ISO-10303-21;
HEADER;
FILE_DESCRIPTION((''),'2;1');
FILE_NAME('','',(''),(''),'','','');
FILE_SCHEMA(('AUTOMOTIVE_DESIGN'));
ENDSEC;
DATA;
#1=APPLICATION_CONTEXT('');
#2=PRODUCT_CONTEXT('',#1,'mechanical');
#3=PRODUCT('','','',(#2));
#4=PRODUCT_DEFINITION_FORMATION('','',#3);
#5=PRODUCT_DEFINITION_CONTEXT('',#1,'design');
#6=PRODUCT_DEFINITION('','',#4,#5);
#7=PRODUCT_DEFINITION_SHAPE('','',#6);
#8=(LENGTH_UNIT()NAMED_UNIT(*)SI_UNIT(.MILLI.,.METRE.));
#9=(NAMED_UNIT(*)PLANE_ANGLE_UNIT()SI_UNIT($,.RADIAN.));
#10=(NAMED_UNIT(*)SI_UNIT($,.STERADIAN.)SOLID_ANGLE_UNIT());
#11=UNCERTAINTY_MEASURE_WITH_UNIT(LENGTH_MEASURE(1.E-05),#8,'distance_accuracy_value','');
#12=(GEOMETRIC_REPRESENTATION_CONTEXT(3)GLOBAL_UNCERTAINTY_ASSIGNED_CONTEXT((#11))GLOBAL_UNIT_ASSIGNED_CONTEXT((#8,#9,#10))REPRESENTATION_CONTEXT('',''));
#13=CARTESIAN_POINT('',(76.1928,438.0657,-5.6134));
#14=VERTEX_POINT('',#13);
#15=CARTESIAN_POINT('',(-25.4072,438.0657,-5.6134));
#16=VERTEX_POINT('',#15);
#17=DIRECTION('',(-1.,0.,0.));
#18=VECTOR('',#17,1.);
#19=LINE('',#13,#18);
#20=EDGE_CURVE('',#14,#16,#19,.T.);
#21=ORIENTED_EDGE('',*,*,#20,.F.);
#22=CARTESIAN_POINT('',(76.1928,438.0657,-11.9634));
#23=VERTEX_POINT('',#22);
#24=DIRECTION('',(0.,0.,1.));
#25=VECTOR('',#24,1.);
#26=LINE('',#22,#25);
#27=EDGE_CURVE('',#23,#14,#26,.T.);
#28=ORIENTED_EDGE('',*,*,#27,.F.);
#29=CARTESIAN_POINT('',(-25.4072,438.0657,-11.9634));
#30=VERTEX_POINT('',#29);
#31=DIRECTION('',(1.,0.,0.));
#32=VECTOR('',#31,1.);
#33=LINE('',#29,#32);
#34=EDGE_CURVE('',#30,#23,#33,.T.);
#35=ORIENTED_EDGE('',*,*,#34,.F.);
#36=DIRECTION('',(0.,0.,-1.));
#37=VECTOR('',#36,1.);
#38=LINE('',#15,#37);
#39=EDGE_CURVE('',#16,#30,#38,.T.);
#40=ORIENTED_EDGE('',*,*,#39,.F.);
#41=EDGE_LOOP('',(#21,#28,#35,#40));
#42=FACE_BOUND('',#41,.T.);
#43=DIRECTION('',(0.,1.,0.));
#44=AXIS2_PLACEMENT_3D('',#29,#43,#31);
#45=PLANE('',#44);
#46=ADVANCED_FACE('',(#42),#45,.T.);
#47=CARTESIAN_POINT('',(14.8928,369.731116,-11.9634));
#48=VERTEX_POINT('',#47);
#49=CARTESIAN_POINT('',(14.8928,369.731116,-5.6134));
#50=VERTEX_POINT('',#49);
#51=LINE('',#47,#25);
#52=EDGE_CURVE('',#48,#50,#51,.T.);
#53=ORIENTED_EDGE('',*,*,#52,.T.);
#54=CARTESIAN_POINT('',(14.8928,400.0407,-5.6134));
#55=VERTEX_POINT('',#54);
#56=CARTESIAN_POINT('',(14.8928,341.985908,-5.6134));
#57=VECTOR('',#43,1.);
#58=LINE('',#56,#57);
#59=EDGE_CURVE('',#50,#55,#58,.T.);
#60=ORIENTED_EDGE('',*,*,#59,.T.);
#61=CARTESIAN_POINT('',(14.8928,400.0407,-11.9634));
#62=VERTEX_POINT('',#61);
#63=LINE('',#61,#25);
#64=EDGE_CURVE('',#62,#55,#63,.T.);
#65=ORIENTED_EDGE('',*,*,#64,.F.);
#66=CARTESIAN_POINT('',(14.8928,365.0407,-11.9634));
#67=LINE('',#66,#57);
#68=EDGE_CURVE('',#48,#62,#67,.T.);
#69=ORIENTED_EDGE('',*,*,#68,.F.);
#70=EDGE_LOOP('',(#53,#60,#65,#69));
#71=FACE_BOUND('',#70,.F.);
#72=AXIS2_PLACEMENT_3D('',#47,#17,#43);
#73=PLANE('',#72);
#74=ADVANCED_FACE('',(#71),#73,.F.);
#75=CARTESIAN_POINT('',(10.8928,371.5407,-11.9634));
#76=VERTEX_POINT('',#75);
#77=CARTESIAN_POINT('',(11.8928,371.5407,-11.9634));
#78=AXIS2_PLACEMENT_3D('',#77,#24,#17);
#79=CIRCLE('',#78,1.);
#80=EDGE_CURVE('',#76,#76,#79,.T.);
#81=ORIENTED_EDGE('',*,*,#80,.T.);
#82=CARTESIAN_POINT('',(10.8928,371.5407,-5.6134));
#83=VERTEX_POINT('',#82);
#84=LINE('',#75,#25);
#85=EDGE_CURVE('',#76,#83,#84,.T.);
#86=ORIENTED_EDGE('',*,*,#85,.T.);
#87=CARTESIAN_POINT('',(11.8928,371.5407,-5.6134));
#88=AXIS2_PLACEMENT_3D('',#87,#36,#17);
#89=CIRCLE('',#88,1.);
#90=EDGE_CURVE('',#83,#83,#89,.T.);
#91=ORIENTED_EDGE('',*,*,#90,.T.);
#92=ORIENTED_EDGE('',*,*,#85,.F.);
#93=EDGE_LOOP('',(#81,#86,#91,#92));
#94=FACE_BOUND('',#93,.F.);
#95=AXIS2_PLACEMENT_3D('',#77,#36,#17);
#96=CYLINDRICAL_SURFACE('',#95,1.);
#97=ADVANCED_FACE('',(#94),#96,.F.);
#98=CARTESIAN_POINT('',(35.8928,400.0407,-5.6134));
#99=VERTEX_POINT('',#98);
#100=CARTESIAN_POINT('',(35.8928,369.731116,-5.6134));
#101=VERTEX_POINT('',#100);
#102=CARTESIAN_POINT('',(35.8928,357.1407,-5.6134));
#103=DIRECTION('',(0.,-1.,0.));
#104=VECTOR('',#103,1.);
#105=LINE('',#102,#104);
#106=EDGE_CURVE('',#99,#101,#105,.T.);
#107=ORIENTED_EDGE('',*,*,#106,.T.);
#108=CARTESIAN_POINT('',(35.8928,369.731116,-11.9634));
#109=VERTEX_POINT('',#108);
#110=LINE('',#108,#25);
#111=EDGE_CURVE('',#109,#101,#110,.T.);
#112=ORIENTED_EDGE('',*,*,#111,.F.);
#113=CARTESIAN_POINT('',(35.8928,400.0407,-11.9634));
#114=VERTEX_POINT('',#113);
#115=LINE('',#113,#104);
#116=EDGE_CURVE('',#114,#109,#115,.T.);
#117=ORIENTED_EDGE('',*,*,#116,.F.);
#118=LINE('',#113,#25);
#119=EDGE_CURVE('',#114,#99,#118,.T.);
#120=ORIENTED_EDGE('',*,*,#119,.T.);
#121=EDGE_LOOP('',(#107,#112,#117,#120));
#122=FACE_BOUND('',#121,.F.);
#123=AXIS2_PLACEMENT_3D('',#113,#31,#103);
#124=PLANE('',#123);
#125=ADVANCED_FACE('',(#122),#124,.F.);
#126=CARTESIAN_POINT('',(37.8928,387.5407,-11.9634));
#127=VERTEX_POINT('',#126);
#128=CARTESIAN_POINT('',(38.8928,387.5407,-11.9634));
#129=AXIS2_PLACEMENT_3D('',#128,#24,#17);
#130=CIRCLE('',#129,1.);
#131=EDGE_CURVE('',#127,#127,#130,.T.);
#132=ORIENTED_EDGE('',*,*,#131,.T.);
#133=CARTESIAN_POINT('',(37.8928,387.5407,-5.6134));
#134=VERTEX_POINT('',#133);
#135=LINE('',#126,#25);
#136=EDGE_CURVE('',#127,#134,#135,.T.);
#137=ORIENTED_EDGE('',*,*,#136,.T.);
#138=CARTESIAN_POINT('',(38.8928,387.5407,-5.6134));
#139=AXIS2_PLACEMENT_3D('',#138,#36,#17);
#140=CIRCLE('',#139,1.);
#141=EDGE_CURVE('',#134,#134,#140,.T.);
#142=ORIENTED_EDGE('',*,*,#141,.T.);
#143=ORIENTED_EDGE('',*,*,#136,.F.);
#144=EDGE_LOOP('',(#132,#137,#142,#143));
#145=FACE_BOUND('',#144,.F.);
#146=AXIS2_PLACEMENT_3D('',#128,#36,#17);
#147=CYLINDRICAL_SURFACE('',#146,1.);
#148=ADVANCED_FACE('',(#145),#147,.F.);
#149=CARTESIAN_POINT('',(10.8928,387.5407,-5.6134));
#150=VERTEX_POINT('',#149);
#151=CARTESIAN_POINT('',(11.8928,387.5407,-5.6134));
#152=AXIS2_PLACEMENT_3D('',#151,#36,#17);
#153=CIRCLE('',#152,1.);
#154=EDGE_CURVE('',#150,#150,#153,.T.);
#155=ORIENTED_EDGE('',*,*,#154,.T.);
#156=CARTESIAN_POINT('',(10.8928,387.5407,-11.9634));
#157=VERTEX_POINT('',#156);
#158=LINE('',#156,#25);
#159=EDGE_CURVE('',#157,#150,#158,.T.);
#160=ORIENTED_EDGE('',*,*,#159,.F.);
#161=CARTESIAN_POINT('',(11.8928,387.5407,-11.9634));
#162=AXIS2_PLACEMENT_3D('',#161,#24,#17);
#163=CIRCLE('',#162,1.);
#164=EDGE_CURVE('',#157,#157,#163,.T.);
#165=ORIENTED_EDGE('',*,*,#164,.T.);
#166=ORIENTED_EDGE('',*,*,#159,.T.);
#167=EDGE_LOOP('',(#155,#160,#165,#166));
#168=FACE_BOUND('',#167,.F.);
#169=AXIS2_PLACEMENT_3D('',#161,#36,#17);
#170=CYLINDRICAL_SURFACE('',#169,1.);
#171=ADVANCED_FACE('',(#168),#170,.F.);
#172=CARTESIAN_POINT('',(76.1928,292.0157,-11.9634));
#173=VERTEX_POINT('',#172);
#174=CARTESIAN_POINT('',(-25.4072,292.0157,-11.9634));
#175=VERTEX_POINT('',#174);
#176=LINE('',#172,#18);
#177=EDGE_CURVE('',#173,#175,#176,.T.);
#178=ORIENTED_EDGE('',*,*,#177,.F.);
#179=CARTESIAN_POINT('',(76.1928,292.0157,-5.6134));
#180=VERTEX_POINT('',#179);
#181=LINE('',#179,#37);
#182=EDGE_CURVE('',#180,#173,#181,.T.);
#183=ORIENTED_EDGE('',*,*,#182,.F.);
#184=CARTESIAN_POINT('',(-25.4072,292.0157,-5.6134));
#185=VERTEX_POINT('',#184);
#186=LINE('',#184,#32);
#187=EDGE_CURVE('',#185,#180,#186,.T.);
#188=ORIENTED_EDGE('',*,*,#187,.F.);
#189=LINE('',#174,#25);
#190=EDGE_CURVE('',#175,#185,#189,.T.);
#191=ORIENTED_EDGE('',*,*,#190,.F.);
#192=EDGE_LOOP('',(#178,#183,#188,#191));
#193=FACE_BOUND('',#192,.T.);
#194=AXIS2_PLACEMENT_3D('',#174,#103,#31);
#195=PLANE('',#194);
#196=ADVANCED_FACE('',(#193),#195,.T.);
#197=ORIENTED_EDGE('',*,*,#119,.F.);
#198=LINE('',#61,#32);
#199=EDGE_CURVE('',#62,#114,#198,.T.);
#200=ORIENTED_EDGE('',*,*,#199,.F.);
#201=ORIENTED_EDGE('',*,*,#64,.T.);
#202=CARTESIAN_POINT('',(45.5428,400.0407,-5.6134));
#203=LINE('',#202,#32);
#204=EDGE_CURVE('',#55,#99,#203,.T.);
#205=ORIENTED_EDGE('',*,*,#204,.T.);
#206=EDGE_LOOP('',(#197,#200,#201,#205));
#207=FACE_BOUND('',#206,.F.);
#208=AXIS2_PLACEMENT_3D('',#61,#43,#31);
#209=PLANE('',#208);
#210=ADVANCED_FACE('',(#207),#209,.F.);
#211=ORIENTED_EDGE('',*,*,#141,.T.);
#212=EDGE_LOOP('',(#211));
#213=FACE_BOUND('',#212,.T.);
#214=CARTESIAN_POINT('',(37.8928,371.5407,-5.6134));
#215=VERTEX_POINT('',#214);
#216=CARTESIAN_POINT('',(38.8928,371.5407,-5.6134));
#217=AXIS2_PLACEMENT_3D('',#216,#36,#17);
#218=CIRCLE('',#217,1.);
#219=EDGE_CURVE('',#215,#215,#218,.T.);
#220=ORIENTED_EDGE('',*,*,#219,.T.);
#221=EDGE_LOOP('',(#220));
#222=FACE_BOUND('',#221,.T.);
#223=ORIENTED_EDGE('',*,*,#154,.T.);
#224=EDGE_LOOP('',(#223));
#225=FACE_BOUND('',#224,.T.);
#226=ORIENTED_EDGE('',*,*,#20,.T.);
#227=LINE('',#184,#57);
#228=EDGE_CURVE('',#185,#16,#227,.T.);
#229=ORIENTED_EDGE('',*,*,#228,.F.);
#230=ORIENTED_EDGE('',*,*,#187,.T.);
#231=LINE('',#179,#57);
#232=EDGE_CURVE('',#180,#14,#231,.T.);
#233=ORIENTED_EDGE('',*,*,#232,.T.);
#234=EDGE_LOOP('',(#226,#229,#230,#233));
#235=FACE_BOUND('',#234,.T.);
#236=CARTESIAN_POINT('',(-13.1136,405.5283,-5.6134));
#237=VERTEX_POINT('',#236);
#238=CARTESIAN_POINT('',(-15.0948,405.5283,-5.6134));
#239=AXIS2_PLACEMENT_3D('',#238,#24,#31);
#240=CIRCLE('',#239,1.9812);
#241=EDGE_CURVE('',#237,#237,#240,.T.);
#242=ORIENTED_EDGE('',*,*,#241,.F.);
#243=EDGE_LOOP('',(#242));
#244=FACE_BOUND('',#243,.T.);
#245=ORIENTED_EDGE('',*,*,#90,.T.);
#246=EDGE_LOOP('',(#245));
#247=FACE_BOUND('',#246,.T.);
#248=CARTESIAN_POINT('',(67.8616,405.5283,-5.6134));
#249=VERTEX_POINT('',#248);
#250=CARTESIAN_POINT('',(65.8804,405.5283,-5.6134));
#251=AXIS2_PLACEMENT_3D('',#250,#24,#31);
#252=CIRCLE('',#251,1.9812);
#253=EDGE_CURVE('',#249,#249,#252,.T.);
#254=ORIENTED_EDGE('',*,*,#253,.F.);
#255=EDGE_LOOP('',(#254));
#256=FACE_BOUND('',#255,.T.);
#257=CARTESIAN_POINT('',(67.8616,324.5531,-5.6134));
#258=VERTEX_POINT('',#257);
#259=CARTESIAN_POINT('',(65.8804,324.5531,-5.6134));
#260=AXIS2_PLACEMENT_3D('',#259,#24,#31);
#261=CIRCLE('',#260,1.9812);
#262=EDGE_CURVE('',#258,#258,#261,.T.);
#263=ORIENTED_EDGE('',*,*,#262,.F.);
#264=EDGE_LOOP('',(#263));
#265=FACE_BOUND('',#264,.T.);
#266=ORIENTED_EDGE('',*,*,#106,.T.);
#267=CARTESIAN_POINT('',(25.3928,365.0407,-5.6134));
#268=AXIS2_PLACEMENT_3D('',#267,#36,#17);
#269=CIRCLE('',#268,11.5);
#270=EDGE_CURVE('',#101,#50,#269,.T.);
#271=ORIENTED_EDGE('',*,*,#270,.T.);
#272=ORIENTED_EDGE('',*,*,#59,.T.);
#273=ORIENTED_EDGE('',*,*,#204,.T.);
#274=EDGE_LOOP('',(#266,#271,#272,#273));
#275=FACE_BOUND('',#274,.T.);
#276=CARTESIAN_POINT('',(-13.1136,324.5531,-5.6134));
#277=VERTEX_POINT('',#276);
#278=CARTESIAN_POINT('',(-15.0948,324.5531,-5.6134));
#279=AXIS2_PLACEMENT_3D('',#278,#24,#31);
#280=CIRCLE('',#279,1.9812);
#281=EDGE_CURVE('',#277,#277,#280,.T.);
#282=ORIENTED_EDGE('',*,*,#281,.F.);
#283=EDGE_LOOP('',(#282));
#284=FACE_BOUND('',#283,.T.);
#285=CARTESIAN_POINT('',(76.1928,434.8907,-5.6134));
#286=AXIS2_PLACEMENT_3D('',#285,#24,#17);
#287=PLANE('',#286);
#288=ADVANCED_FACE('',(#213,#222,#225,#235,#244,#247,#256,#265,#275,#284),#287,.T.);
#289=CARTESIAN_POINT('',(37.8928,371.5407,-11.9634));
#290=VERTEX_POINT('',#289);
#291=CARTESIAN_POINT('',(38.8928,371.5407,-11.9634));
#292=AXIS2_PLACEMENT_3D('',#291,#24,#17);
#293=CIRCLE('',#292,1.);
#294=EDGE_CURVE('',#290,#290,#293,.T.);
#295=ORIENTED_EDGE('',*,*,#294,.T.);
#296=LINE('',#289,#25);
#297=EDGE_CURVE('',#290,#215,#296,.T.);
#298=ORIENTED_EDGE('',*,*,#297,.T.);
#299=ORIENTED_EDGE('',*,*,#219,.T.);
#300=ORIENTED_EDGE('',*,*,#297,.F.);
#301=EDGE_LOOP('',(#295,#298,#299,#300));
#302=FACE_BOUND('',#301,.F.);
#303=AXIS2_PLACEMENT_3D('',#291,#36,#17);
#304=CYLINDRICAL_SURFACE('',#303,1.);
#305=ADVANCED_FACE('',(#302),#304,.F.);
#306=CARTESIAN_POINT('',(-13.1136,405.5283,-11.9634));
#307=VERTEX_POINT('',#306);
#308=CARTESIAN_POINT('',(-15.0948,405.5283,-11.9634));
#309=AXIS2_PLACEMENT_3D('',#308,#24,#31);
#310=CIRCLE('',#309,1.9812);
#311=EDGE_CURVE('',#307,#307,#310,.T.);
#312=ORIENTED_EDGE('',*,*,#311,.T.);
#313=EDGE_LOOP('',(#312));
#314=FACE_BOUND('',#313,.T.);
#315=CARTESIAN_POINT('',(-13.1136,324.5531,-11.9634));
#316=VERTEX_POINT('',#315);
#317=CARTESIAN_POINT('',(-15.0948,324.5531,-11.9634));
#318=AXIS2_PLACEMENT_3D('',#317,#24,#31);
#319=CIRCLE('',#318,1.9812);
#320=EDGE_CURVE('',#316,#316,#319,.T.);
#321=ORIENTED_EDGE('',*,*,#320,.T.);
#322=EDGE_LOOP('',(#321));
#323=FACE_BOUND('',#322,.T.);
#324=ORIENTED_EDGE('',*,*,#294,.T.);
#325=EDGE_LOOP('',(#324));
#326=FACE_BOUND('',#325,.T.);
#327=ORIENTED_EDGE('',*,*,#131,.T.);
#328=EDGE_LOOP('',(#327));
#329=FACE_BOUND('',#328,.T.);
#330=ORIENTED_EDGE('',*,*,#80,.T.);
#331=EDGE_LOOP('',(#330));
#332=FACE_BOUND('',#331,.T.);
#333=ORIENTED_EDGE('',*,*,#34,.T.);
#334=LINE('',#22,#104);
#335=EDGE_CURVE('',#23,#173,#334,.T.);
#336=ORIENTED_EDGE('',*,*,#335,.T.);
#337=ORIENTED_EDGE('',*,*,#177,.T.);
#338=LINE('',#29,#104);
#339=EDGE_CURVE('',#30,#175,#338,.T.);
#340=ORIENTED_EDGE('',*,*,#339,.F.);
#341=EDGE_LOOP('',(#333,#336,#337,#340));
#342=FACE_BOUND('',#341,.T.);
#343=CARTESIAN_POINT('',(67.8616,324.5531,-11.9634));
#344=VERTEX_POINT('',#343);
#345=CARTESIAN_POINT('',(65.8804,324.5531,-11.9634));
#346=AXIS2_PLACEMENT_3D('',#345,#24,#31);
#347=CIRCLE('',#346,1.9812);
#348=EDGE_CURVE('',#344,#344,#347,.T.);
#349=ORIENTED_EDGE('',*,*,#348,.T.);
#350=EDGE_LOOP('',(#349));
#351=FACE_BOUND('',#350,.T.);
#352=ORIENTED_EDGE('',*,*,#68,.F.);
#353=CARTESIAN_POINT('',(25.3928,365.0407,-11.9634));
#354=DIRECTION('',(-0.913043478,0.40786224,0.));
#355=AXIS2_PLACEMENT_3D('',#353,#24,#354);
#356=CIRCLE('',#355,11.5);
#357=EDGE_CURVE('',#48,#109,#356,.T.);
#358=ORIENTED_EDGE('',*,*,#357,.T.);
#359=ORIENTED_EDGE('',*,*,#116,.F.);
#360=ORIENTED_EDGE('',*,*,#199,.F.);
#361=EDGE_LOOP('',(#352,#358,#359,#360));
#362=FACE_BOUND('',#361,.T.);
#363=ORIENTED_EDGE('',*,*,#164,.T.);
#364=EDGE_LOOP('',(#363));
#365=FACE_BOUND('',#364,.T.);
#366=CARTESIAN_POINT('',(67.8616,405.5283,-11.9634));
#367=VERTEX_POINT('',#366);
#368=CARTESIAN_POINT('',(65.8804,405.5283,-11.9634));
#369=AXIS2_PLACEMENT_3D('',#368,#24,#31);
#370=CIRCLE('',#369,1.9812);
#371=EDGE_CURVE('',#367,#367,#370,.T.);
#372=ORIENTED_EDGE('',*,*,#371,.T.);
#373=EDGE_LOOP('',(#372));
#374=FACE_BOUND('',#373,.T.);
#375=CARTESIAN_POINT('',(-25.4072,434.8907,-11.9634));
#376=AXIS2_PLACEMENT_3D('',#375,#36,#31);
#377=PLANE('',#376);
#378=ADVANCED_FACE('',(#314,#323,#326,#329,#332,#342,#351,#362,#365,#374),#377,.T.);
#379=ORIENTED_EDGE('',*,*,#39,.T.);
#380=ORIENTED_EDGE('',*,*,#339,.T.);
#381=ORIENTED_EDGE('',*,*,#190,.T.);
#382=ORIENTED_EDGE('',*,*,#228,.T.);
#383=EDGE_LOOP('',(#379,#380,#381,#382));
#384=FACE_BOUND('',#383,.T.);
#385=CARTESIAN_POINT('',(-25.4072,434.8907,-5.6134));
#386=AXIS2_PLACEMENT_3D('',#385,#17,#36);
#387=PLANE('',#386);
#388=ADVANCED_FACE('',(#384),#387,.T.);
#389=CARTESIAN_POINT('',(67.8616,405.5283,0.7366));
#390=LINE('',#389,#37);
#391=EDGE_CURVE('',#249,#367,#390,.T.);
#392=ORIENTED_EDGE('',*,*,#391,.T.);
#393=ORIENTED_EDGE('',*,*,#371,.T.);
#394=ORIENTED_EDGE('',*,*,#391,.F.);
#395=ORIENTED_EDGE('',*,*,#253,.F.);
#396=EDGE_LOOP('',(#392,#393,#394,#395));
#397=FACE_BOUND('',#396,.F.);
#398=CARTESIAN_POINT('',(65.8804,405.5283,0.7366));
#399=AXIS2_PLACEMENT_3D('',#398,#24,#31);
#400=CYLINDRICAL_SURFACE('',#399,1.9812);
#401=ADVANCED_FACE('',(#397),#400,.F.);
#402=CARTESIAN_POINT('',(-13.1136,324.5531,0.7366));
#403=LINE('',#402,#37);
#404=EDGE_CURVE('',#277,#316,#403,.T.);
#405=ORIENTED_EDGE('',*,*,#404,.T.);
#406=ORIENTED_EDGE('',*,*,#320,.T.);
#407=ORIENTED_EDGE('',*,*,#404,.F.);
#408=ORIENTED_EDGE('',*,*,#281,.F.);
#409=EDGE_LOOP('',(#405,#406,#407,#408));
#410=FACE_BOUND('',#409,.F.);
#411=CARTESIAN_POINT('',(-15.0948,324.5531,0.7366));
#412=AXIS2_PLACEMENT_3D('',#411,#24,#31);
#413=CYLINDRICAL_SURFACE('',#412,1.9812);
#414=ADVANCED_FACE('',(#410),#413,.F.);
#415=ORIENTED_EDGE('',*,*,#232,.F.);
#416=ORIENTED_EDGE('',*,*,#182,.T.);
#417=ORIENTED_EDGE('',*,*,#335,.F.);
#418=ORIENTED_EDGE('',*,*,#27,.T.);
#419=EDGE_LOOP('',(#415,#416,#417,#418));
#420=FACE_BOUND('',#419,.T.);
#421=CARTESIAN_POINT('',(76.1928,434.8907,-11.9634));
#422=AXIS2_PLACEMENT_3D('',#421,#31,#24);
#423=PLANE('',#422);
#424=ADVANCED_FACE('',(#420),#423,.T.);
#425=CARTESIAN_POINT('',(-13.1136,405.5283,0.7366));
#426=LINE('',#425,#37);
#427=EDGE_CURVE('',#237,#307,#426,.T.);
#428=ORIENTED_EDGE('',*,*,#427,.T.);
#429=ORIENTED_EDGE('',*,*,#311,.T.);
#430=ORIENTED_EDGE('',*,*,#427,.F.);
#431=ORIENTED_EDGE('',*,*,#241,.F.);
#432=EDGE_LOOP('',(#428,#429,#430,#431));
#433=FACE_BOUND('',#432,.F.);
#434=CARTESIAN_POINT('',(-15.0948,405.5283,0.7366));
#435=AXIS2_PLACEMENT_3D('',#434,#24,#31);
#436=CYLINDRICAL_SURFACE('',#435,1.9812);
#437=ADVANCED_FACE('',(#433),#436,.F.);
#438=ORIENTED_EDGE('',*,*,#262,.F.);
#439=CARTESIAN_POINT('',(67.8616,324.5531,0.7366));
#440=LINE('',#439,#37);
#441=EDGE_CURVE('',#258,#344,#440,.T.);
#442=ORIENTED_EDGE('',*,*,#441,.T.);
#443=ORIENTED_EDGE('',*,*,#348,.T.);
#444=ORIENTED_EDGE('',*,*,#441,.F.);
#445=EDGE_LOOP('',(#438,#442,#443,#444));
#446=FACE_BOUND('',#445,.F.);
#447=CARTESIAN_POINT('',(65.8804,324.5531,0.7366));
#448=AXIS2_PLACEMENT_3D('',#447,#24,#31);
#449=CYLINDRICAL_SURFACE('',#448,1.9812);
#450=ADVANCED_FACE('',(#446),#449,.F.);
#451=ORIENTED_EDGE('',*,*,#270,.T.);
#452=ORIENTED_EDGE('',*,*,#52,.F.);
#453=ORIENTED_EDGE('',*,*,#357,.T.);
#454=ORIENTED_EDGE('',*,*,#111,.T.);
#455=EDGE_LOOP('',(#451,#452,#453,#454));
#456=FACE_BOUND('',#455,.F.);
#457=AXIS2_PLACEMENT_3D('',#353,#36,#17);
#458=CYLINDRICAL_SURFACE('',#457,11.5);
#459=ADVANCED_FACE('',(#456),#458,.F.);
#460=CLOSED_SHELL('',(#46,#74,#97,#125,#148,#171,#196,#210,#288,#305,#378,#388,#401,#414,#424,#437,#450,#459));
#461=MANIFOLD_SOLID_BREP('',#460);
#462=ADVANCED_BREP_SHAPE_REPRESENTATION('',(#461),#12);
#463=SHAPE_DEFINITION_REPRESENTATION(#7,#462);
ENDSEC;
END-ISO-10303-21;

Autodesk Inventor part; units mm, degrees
ref_plane "YZ Plane" through (0, 0, 0) normal (1, 0, 0) x (0, 1, 0)
ref_plane "XZ Plane" through (0, 0, 0) normal (0, 1, 0) x (-1, 0, 0)
ref_plane "XY Plane" through (0, 0, 0) normal (0, 0, 1) x (1, 0, 0)
sketch "Sketch1" plane through (0, 0, 0) normal (0, 0, 1) x (1, 0, 0)
  line L0 (-25.4072, 25.3665) -> (76.1928, 25.3665)
  line L1 (76.1928, 25.3665) -> (76.1928, -76.2335)
  line L2 (76.1928, -76.2335) -> (-25.4072, -76.2335)
  line L3 (-25.4072, -76.2335) -> (-25.4072, 25.3665)
  point P0 (0, 0)
  dimension "d0" = 101.6
  dimension "d1" = 101.6
extrude "Extrusion1" add sketch "Sketch1" along normal blind 0.7366
sketch "Sketch2" plane through (0, 0, 0.7366) normal (0, 0, 1) x (1, 0, 0)
  line L0 (-25.4072, 25.3665) -> (76.1928, -76.2335)
  line L1 (76.1928, 25.3665) -> (-25.4072, -76.2335)
  circle A0 centre (25.3928, -25.4335) radius 27.432
  point P0 (0, 0)
  dimension "d4" = 54.864
extrude "Extrusion2" cut sketch "Sketch2" against normal blind 0.7366
sketch "Sketch3" plane through (0, 0, 0.7366) normal (0, 0, 1) x (1, 0, 0)
  line L0 (-25.4072, -76.2335) -> (-25.4072, 25.3665) projected
  line L1 (-25.4072, 25.3665) -> (-25.4072, -25.4335)
  line L2 (-25.4072, -25.4335) -> (-25.4072, 19.4102)
  line L3 (-25.4072, 25.3665) -> (76.1928, -76.2335)
  line L4 (76.1928, 25.3665) -> (-25.4072, -76.2335)
  circle A0 centre (-19.4509, 19.4102) radius 1.9812
  point P0 (0, 0)
  dimension "d7" = 44.8437
  dimension "d8" = 3.9624
extrude "Extrusion3" cut sketch "Sketch3" against normal blind 0.7366 contours A0 L3 | L3 A0
sketch "Sketch4" plane through (0, 0, 0.7366) normal (0, 0, 1) x (1, 0, 0)
  line L0 (-25.4072, -76.2335) -> (76.1928, 25.3665)
  line L1 (-25.4072, 25.3665) -> (76.1928, -76.2335)
  circle A0 centre (70.2365, 19.4102) radius 1.9819
  circle A1 centre (70.2365, -70.2772) radius 1.983
  circle A2 centre (-19.4509, -70.2772) radius 1.9812
  point P0 (0, 0)
extrude "Extrusion4" cut sketch "Sketch4" against normal blind 0.7366
sketch "Sketch5" plane through (0, 0, 0.7366) normal (0, 0, 1) x (1, 0, 0)
  circle A0 centre (25.3928, -25.4335) radius 27.432 projected
  circle A1 centre (25.3928, -25.4335) radius 29.972
  circle A2 centre (25.3928, -25.4335) radius 32.512
  point P0 (0, 0)
  dimension "d13" = 59.944
  dimension "d14" = 65.024
extrude "Extrusion5" add sketch "Sketch5" along normal blind 6.6548 contours A2
fillet "Fillet1" radius 3.175 4 edges at (-25.4072, 25.3665, 0.3683) (76.1928, 25.3665, 0.3683) (76.1928, -76.2335, 0.3683) (-25.4072, -76.2335, 0.3683)
sketch "Sketch6" plane through (25.3928, -25.4335, 0.7366) normal (0, 0, 1) x (1, 0, 0)
  circle A0 centre (0, 0) radius 29.972 projected
  circle A1 centre (0, 0) radius 27.432 projected
  point P0 (-25.3928, 25.4335)
extrude "Extrusion6" add sketch "Sketch6" along normal blind 9.1948
sketch "Sketch7" plane through (25.3928, -25.4335, 7.3914) normal (0, 0, 1) x (1, 0, 0)
  circle A0 centre (0, 0) radius 29.972 projected
  circle A1 centre (0, 0) radius 32.512 projected
  point P0 (-25.3928, 25.4335)
extrude "Extrusion7" cut sketch "Sketch7" against normal blind 6.6548
sketch "Sketch8" plane through (25.3928, -25.4335, 9.9314) normal (0, 0, 1) x (1, 0, 0)
  circle A0 centre (0, 0) radius 27.432 projected
  circle A1 centre (0, 0) radius 29.972 projected
  point P0 (-25.3928, 25.4335)
extrude "Extrusion8" cut sketch "Sketch8" against normal blind 2.54
sketch "Sketch9" plane through (0, 0, 0.7366) normal (0, 0, 1) x (1, 0, 0)
  circle A0 centre (-19.4509, 19.4102) radius 1.9812 projected
  circle A1 centre (70.2365, -70.2772) radius 1.983 projected
  circle A2 centre (-19.4509, -70.2772) radius 1.9812 projected
  circle A3 centre (70.2365, 19.4102) radius 1.9819 projected
  point P0 (0, 0)
extrude "Extrusion9" add sketch "Sketch9" against normal blind 0.7366
sketch "Sketch10" plane through (0, 0, 0.7366) normal (0, 0, 1) x (1, 0, 0)
  line L0 (-25.4072, 25.3665) -> (76.1928, 25.3665)
  line L1 (76.1928, 25.3665) -> (76.1928, -76.2335)
  line L2 (76.1928, -76.2335) -> (-25.4072, -76.2335)
  line L3 (-25.4072, -76.2335) -> (-25.4072, 25.3665)
  line L4 (-25.4072, 25.3665) -> (76.1928, -76.2335)
  line L5 (-25.4072, -76.2335) -> (76.1928, 25.3665)
  line L6 (-25.4072, 25.3665) -> (-25.4072, -25.4335)
  line L7 (-25.4072, -25.4335) -> (-25.4072, 15.0541)
  circle A0 centre (-15.0948, 15.0541) radius 1.9812
  circle A1 centre (65.8804, 15.0541) radius 1.9818
  circle A2 centre (65.8804, -65.9211) radius 1.9832
  circle A3 centre (-15.0948, -65.9211) radius 1.9812
  point P0 (0, 0)
  dimension "d26" = 40.4876
  dimension "d27" = 3.9624
extrude "Extrusion10" cut sketch "Sketch10" against normal blind 0.7366 contours A0 L4 | L4 A0 | A1 L5 | L5 A1 | A2 L4 | L4 A2 | A3 L5 | L5 A3
sketch "Sketch11" plane through (0, 0, 0.7366) normal (0, 0, 1) x (1, 0, 0)
  circle A0 centre (-15.0948, 15.0541) radius 1.9812 projected
  circle A1 centre (-15.0948, -65.9211) radius 1.9812 projected
  circle A2 centre (65.8804, 15.0541) radius 1.9818 projected
  circle A3 centre (65.8804, -65.9211) radius 1.9832 projected
  line L0 (-25.4072, 25.3665) -> (76.1928, 25.3665)
  line L1 (76.1928, 25.3665) -> (76.1928, -76.2335)
  line L2 (76.1928, -76.2335) -> (-25.4072, -76.2335)
  line L3 (-25.4072, -76.2335) -> (-25.4072, 25.3665)
  point P0 (0, 0)
extrude "Extrusion11" add sketch "Sketch11" along normal blind 12.7
sketch "Sketch12" plane through (0, 0, 13.4366) normal (0, 0, 1) x (1, 0, 0)
  circle A0 centre (65.8804, -65.9211) radius 1.9832 projected
  circle A1 centre (65.8804, 15.0541) radius 1.9818 projected
  circle A2 centre (-15.0948, 15.0541) radius 1.9812 projected
  circle A3 centre (-15.0948, -65.9211) radius 1.9812 projected
  line L0 (76.1928, 25.3665) -> (76.1928, -76.2335) projected
  line L1 (-25.4072, 25.3665) -> (76.1928, 25.3665) projected
  line L2 (-25.4072, -76.2335) -> (-25.4072, 25.3665) projected
  line L3 (76.1928, -76.2335) -> (-25.4072, -76.2335) projected
  point P0 (0, 0)
extrude "Extrusion12" add sketch "Sketch12" against normal blind 19.05
sketch "Sketch13" plane through (0, 0, 13.4366) normal (0, 0, 1) x (1, 0, 0)
  circle A0 centre (65.8804, -65.9211) radius 1.9832 projected
  circle A1 centre (65.8804, 15.0541) radius 1.9818 projected
  circle A2 centre (-15.0948, 15.0541) radius 1.9812 projected
  circle A3 centre (-15.0948, -65.9211) radius 1.9812 projected
  line L0 (76.1928, 25.3665) -> (76.1928, -76.2335) projected
  line L1 (-25.4072, 25.3665) -> (76.1928, 25.3665) projected
  line L2 (-25.4072, -76.2335) -> (-25.4072, 25.3665) projected
  line L3 (76.1928, -76.2335) -> (-25.4072, -76.2335) projected
  point P0 (0, 0)
extrude "Extrusion13" cut sketch "Sketch13" against normal blind 12.7
sketch "Sketch14" plane through (-25.4072, 25.3665, -5.6134) normal (0, 1, 0) x (1, 0, 0)
  line L0 (0, -6.35) -> (101.6, -6.35) projected
  line L1 (101.6, -6.35) -> (101.6, 0) projected
  line L2 (101.6, 0) -> (0, 0) projected
  line L3 (0, 0) -> (0, -6.35) projected
  point P0 (25.4072, -5.6134)
sketch "Sketch15" plane through (-25.4072, -76.2335, -5.6134) normal (-1, 0, 0) x (0, 0, 1)
  line L0 (6.35, 0) -> (6.35, 101.6) projected
  line L1 (0, 101.6) -> (6.35, 101.6) projected
  line L2 (0, 101.6) -> (0, 0) projected
  line L3 (6.35, 0) -> (0, 0) projected
  point P0 (5.6134, 76.2335)
sketch "Sketch16" plane through (-25.4072, -76.2335, -5.6134) normal (0, -1, 0) x (1, 0, 0)
  line L0 (101.6, 6.35) -> (0, 6.35) projected
  line L1 (0, 6.35) -> (0, 0) projected
  line L2 (0, 0) -> (101.6, 0) projected
  line L3 (101.6, 6.35) -> (101.6, 0) projected
  point P0 (25.4072, 5.6134)
sketch "Sketch17" plane through (76.1928, -76.2335, -5.6134) normal (1, 0, 0) x (0, 0, -1)
  line L0 (-6.35, 101.6) -> (-6.35, 0) projected
  line L1 (-6.35, 0) -> (0, 0) projected
  line L2 (0, 0) -> (0, 101.6) projected
  line L3 (-6.35, 101.6) -> (0, 101.6) projected
  point P0 (-5.6134, 76.2335)
extrude "Extrusion14" add sketch "Sketch14" along normal blind 53.975
extrude "Extrusion15" add sketch "Sketch17" along normal blind 47.625
extrude "Extrusion16" add sketch "Sketch16" along normal blind 47.625
extrude "Extrusion17" add sketch "Sketch15" along normal blind 53.975
sketch "Sketch18" plane through (-25.4072, 25.3665, 0.7366) normal (0, 1, 0) x (1, 0, 0)
  line L0 (-53.975, 6.35) -> (-53.975, 0) projected
  line L1 (0, 0) -> (-53.975, 0) projected
  line L2 (0, 6.35) -> (0, 0) projected
  line L3 (0, 6.35) -> (-53.975, 6.35) projected
  point P0 (25.4072, 0.7366)
extrude "Extrusion18" add sketch "Sketch18" along normal blind 53.975
sketch "Sketch19" plane through (76.1928, 25.3665, 0.7366) normal (0, 1, 0) x (1, 0, 0)
  line L0 (47.625, 0) -> (47.625, 6.35) projected
  line L1 (0, 6.35) -> (47.625, 6.35) projected
  line L2 (0, 0) -> (0, 6.35) projected
  line L3 (0, 0) -> (47.625, 0) projected
  point P0 (-76.1928, 0.7366)
extrude "Extrusion19" add sketch "Sketch19" along normal blind 53.975
sketch "Sketch20" plane through (-25.4072, -123.8585, -5.6134) normal (-1, 0, 0) x (0, 0, 1)
  line L0 (6.35, 47.625) -> (0, 47.625) projected
  line L1 (0, 47.625) -> (0, 0) projected
  line L2 (0, 0) -> (6.35, 0) projected
  line L3 (6.35, 0) -> (6.35, 47.625) projected
  point P0 (5.6134, 123.8585)
extrude "Extrusion20" add sketch "Sketch20" along normal blind 53.975
sketch "Sketch21" plane through (123.8178, -76.2335, -5.6134) normal (0, -1, 0) x (1, 0, 0)
  line L0 (-47.625, 6.35) -> (-47.625, 0) projected
  line L1 (-47.625, 0) -> (0, 0) projected
  line L2 (0, 0) -> (0, 6.35) projected
  line L3 (0, 6.35) -> (-47.625, 6.35) projected
  point P0 (-123.8178, 5.6134)
extrude "Extrusion21" add sketch "Sketch21" along normal blind 47.625
sketch "Sketch22" plane through (-25.4072, 79.3415, -5.6134) normal (0, 1, 0) x (1, 0, 0)
  line L0 (149.225, -6.35) -> (-53.975, -6.35) projected
  line L1 (149.225, 0) -> (149.225, -6.35) projected
  line L2 (-53.975, 0) -> (149.225, 0) projected
  line L3 (-53.975, -6.35) -> (-53.975, 0) projected
  point P0 (25.4072, -5.6134)
extrude "Extrusion22" cut sketch "Sketch22" against normal blind 53.975
sketch "Sketch23" plane through (-79.3822, -76.2335, -5.6134) normal (-1, 0, 0) x (0, 0, 1)
  line L0 (6.35, 101.6) -> (0, 101.6) projected
  line L1 (0, -47.625) -> (0, 101.6) projected
  line L2 (6.35, -47.625) -> (0, -47.625) projected
  line L3 (6.35, 101.6) -> (6.35, -47.625) projected
  point P0 (5.6134, 76.2335)
extrude "Extrusion23" cut sketch "Sketch23" against normal blind 53.975
sketch "Sketch24" plane through (-25.4072, -123.8585, -5.6134) normal (0, -1, 0) x (1, 0, 0)
  line L0 (0, 6.35) -> (0, 0) projected
  line L1 (149.225, 0) -> (0, 0) projected
  line L2 (149.225, 6.35) -> (149.225, 0) projected
  line L3 (0, 6.35) -> (149.225, 6.35) projected
  point P0 (25.4072, 5.6134)
extrude "Extrusion24" cut sketch "Sketch24" against normal blind 47.625
sketch "Sketch25" plane through (123.8178, -76.2335, -5.6134) normal (1, 0, 0) x (0, 0, -1)
  line L0 (-6.35, 0) -> (0, 0) projected
  line L1 (0, 101.6) -> (0, 0) projected
  line L2 (0, 101.6) -> (-6.35, 101.6) projected
  line L3 (-6.35, 0) -> (-6.35, 101.6) projected
  point P0 (-5.6134, 76.2335)
extrude "Extrusion25" cut sketch "Sketch25" against normal blind 47.625
sketch "Sketch26" plane through (-25.4072, 25.3665, -5.6134) normal (0, 1, 0) x (1, 0, 0)
  line L0 (101.6, -6.35) -> (101.6, 0) projected
  line L1 (0, 0) -> (101.6, 0) projected
  line L2 (0, 0) -> (0, -6.35) projected
  line L3 (101.6, -6.35) -> (0, -6.35) projected
  point P0 (25.4072, -5.6134)
extrude "Extrusion26" add sketch "Sketch26" along normal blind 53.975
sketch "Sketch27" plane through (-25.4072, -76.2335, -5.6134) normal (-1, 0, 0) x (0, 0, 1)
  line L0 (0, 0) -> (6.35, 0) projected
  line L1 (6.35, 0) -> (6.35, 155.575) projected
  line L2 (6.35, 155.575) -> (0, 155.575) projected
  line L3 (0, 0) -> (0, 155.575) projected
  point P0 (5.6134, 76.2335)
extrude "Extrusion27" add sketch "Sketch27" along normal blind 53.975
sketch "Sketch28" plane through (-25.4072, -76.2335, -5.6134) normal (0, -1, 0) x (1, 0, 0)
  line L0 (101.6, 0) -> (101.6, 6.35) projected
  line L1 (101.6, 6.35) -> (-53.975, 6.35) projected
  line L2 (-53.975, 6.35) -> (-53.975, 0) projected
  line L3 (101.6, 0) -> (-53.975, 0) projected
  point P0 (25.4072, 5.6134)
extrude "Extrusion28" add sketch "Sketch28" along normal blind 22.225
sketch "Sketch29" plane through (-25.4072, 79.3415, -5.6134) normal (0, 1, 0) x (1, 0, 0)
  line L0 (101.6, -6.35) -> (-53.975, -6.35) projected
  line L1 (101.6, 0) -> (101.6, -6.35) projected
  line L2 (-53.975, 0) -> (101.6, 0) projected
  line L3 (-53.975, 0) -> (-53.975, -6.35) projected
  point P0 (25.4072, -5.6134)
extrude "Extrusion29" add sketch "Sketch29" along normal blind 158.6992
sketch "Sketch30" plane through (-25.4072, 238.0407, -5.6134) normal (0, 1, 0) x (1, 0, 0)
  line L0 (-53.975, -6.35) -> (-53.975, 0) projected
  line L1 (101.6, -6.35) -> (-53.975, -6.35) projected
  line L2 (101.6, 0) -> (101.6, -6.35) projected
  line L3 (-53.975, 0) -> (101.6, 0) projected
  point P0 (25.4072, -5.6134)
extrude "Extrusion30" add sketch "Sketch30" along normal blind 177.8
sketch "Sketch31" plane through (0, 0, 0.7366) normal (0, 0, 1) x (1, 0, 0)
  line L0 (76.1928, 415.8407) -> (76.1928, -98.4585) projected
  line L1 (76.1928, 415.8407) -> (-79.3822, 415.8407) projected
  line L2 (65.8804, 415.8407) -> (65.8804, 383.3033)
  line L3 (65.8804, 383.3033) -> (-17.076, 383.3033)
  line L4 (-17.076, 383.3033) -> (-13.1136, 383.3033)
  line L5 (-13.1136, 383.3033) -> (-15.0948, 383.3033)
  circle A0 centre (-15.0948, 383.3033) radius 1.9812
  circle A1 centre (65.8804, 383.3033) radius 1.9812
  line L6 (65.8804, 383.3033) -> (65.8804, 302.3281)
  circle A2 centre (65.8804, 302.3281) radius 1.9812
  line L7 (-15.0948, 383.3033) -> (-15.0948, 302.3281)
  circle A3 centre (-15.0948, 302.3281) radius 1.9812
  point P0 (0, 0)
  dimension "d70" = 32.5374
  dimension "d71" = 80.9752
extrude "Extrusion31" cut sketch "Sketch31" against normal blind 177.8
sketch "Sketch32" plane through (0, 0, -5.6134) normal (0, 0, -1) x (-1, 0, 0)
  circle A0 centre (15.0948, 383.3033) radius 1.9812 projected
  circle A1 centre (15.0948, 302.3281) radius 1.9812 projected
  circle A2 centre (-65.8804, 302.3281) radius 1.9812 projected
  circle A3 centre (-65.8804, 383.3033) radius 1.9812 projected
  circle A4 centre (15.0948, -65.9211) radius 1.9812 projected
  circle A5 centre (15.0948, 15.0541) radius 1.9812 projected
  circle A6 centre (-65.8804, 15.0541) radius 1.9818 projected
  circle A7 centre (-65.8804, -65.9211) radius 1.9832 projected
  line L0 (-76.1928, 415.8407) -> (-76.1928, -98.4585) projected
  line L1 (-76.1928, -98.4585) -> (79.3822, -98.4585) projected
  line L2 (79.3822, -98.4585) -> (79.3822, 415.8407) projected
  line L3 (79.3822, 415.8407) -> (-76.1928, 415.8407) projected
  point P0 (0, 0)
extrude "Extrusion32" add sketch "Sketch32" along normal blind 6.35
sketch "Sketch33" plane through (0, 0, 0.7366) normal (0, 0, 1) x (1, 0, 0)
  line L0 (76.1928, 415.8407) -> (76.1928, -98.4585) projected
  line L1 (76.1928, 158.6911) -> (76.1928, 107.8911)
  line L2 (76.1928, 107.8911) -> (25.3928, 107.8911)
  line L3 (25.3928, 107.8911) -> (25.3928, 209.4911)
  line L4 (25.3928, 209.4911) -> (76.1928, 209.4911)
  line L5 (76.1928, 209.4911) -> (76.1928, 107.8911)
  point P0 (0, 0)
  dimension "d76" = 50.8
  dimension "d77" = 50.8
  dimension "d78" = 101.6
extrude "Extrusion33" cut sketch "Sketch33" against normal blind 25.4
sketch "Sketch34" plane through (0, 0, 0.7366) normal (0, 0, 1) x (1, 0, 0)
  line L0 (25.3928, 107.8911) -> (25.3928, 209.4911) projected
  line L1 (76.1928, 107.8911) -> (76.1928, -98.4585) projected
  line L2 (25.3928, 158.6911) -> (-25.4072, 158.6911)
  circle A0 centre (-25.4072, 158.6911) radius 12.7
  point P0 (0, 0)
  dimension "d81" = 50.8
  dimension "d82" = 25.4
extrude "Extrusion34" cut sketch "Sketch34" against normal blind 25.4
fillet "Fillet2" radius 12.7 2 edges at (25.3928, 209.4911, -5.6134) (25.3928, 107.8911, -5.6134)
sketch "Sketch35" plane through (0, 0, 0.7366) normal (0, 0, 1) x (1, 0, 0)
  line L0 (-79.3822, 415.8407) -> (76.1928, 415.8407)
  line L1 (76.1928, 415.8407) -> (76.1928, 422.1907)
  line L2 (76.1928, 422.1907) -> (-79.3822, 422.1907)
  line L3 (-79.3822, 422.1907) -> (-79.3822, 415.8407)
  line L4 (-79.3822, -98.4585) -> (76.1928, -98.4585)
  line L5 (76.1928, -98.4585) -> (76.1928, -104.8085)
  line L6 (76.1928, -104.8085) -> (-79.3822, -104.8085)
  line L7 (-79.3822, -104.8085) -> (-79.3822, -98.4585)
  point P0 (0, 0)
  dimension "d86" = 6.35
  dimension "d87" = 6.35
extrude "Extrusion35" add sketch "Sketch35" against normal blind 6.35
sketch "Sketch36" plane through (-25.4072, 415.8407, -5.6134) normal (0, 1, 0) x (1, 0, 0)
  line L0 (-53.975, 0) -> (101.6, 0) projected
  line L1 (101.6, 6.35) -> (101.6, 0) projected
  line L2 (101.6, 6.35) -> (-53.975, 6.35) projected
  line L3 (-53.975, 0) -> (-53.975, 6.35) projected
  point P0 (25.4072, -5.6134)
extrude "Extrusion36" add sketch "Sketch36" along normal blind 6.35
sketch "Sketch37" plane through (-25.4072, -98.4585, -5.6134) normal (0, -1, 0) x (1, 0, 0)
  line L0 (101.6, 0) -> (-53.975, 0) projected
  line L1 (-53.975, -6.35) -> (-53.975, 0) projected
  line L2 (-53.975, -6.35) -> (101.6, -6.35) projected
  line L3 (101.6, 0) -> (101.6, -6.35) projected
  point P0 (25.4072, 5.6134)
extrude "Extrusion37" add sketch "Sketch37" along normal blind 6.35
sketch "Sketch38" plane through (0, 0, 0.7366) normal (0, 0, 1) x (1, 0, 0)
  line L0 (76.1928, 422.1907) -> (-79.3822, 422.1907) projected
  line L1 (76.1928, 107.8911) -> (76.1928, -104.8085) projected
  circle A0 centre (65.8804, 302.3281) radius 1.9812 projected
  circle A1 centre (-15.0948, 302.3281) radius 1.9812 projected
  line L2 (-15.0948, 422.1907) -> (-15.0948, 405.5283)
  line L3 (-15.0948, 405.5283) -> (65.8804, 405.5283)
  line L4 (65.8804, 302.3281) -> (65.8804, 324.5531)
  line L5 (-15.0948, 302.3281) -> (-15.0948, 324.5531)
  circle A2 centre (-15.0948, 324.5531) radius 1.9812
  circle A3 centre (-15.0948, 405.5283) radius 1.9812
  circle A4 centre (65.8804, 405.5283) radius 1.9812
  circle A5 centre (65.8804, 324.5531) radius 1.9812
  point P0 (0, 0)
  dimension "d94" = 16.6624
  dimension "d95" = 22.225
extrude "Extrusion38" cut sketch "Sketch38" against normal blind 12.7 contours A3 L3 L2 | L2 L3 A3 | A2 | A4 | A5
sketch "Sketch39" plane through (0, 0, 0.7366) normal (0, 0, 1) x (1, 0, 0)
  circle A0 centre (65.8804, 383.3033) radius 1.9812 projected
  circle A1 centre (65.8804, 302.3281) radius 1.9812 projected
  circle A2 centre (-15.0948, 302.3281) radius 1.9812 projected
  circle A3 centre (-15.0948, 383.3033) radius 1.9812 projected
  point P0 (0, 0)
extrude "Extrusion39" add sketch "Sketch39" against normal blind 12.7
sketch "Sketch40" plane through (0, 0, 0.7366) normal (0, 0, 1) x (1, 0, 0)
  circle A0 centre (-15.0948, 15.0541) radius 1.9812 projected
  circle A1 centre (-15.0948, -65.9211) radius 1.9812 projected
  line L0 (76.1928, 107.8911) -> (76.1928, -104.8085) projected
  line L1 (-15.0948, -65.9211) -> (-15.0948, -88.1461)
  line L2 (-15.0948, -88.1461) -> (65.8804, -88.1461)
  line L3 (-15.0948, 15.0541) -> (-15.0948, -7.1709)
  line L4 (-15.0948, -7.1709) -> (65.8804, -7.1709)
  circle A2 centre (-15.0948, -88.1461) radius 1.9812
  circle A3 centre (65.8804, -88.1461) radius 1.9818
  circle A4 centre (65.8804, -7.1709) radius 1.9818
  circle A5 centre (-15.0948, -7.1709) radius 1.9812
  point P0 (0, 0)
  dimension "d100" = 22.225
  dimension "d101" = 22.225
extrude "Extrusion40" cut sketch "Sketch40" against normal blind 12.7 contours A2 L2 L1 | L1 L2 A2 | A5 L4 L3 | L3 L4 A5 | A3 | A4
sketch "Sketch41" plane through (0, 0, 0.7366) normal (0, 0, 1) x (1, 0, 0)
  circle A0 centre (65.8804, -65.9211) radius 1.9832 projected
  circle A1 centre (65.8804, 15.0541) radius 1.9818 projected
  circle A2 centre (-15.0948, 15.0541) radius 1.9812 projected
  circle A3 centre (-15.0948, -65.9211) radius 1.9812 projected
  point P0 (0, 0)
extrude "Extrusion41" add sketch "Sketch41" against normal blind 12.7
sketch "Sketch42" plane through (0, 0, 0.7366) normal (0, 0, 1) x (1, 0, 0)
  circle A0 centre (65.8804, -7.1709) radius 1.9818 projected
  circle A1 centre (65.8804, -88.1461) radius 1.9818 projected
  circle A2 centre (-15.0948, -7.1709) radius 1.9812 projected
  circle A3 centre (-15.0948, -88.1461) radius 1.9812 projected
  circle A4 centre (-15.0948, 405.5283) radius 1.9812 projected
  circle A5 centre (-15.0948, 324.5531) radius 1.9812 projected
  circle A6 centre (65.8804, 405.5283) radius 1.9812 projected
  circle A7 centre (-25.4072, 158.6911) radius 12.7 projected
  line L0 (76.1928, 107.8911) -> (38.0928, 107.8911) projected
  arc A8 (25.3928, 120.5911) -> (38.0928, 107.8911) centre (38.0928, 120.5911) ccw projected
  line L1 (25.3928, 120.5911) -> (25.3928, 196.7911) projected
  arc A9 (38.0928, 209.4911) -> (25.3928, 196.7911) centre (38.0928, 196.7911) ccw projected
  line L2 (38.0928, 209.4911) -> (76.1928, 209.4911) projected
  line L3 (76.1928, 422.1907) -> (76.1928, 209.4911) projected
  line L4 (76.1928, 422.1907) -> (-79.3822, 422.1907) projected
  line L5 (-79.3822, 422.1907) -> (-79.3822, -104.8085) projected
  line L6 (-79.3822, -104.8085) -> (76.1928, -104.8085) projected
  line L7 (76.1928, 107.8911) -> (76.1928, -104.8085) projected
  line L8 (65.8804, 405.5283) -> (-15.0948, 405.5283)
  line L9 (-15.0948, 405.5283) -> (-15.0948, 324.5531)
  line L10 (25.3928, 365.0407) -> (25.3928, 415.8407)
  line L11 (25.3928, 415.8407) -> (-25.4072, 415.8407)
  line L12 (-25.4072, 415.8407) -> (76.1928, 415.8407)
  line L13 (76.1928, 415.8407) -> (76.1928, 314.2407)
  line L14 (76.1928, 314.2407) -> (-25.4072, 314.2407)
  line L15 (-25.4072, 314.2407) -> (-25.4072, 415.8407)
  point P0 (0, 0)
  dimension "d106" = 50.8
  dimension "d107" = 50.8
  dimension "d108" = 101.6
  dimension "d109" = 101.6
extrude "Extrusion42" cut sketch "Sketch42" against normal blind 25.4 contours L7 L6 L5 L4 L3 L12 L11 L15 L14 L2 A9 L1 A8 L0
sketch "Sketch43" plane through (0, 0, 0.7366) normal (0, 0, 1) x (1, 0, 0)
  line L0 (-25.4072, 314.2407) -> (76.1928, 314.2407) projected
  line L1 (76.1928, 415.8407) -> (76.1928, 314.2407) projected
  line L2 (76.1928, 415.8407) -> (-25.4072, 415.8407) projected
  line L3 (-25.4072, 415.8407) -> (-25.4072, 314.2407) projected
  circle A0 centre (-15.0948, 405.5283) radius 1.9812 projected
  circle A1 centre (-15.0948, 324.5531) radius 1.9812 projected
  circle A2 centre (65.8804, 324.5531) radius 1.9812 projected
  circle A3 centre (65.8804, 405.5283) radius 1.9812 projected
  point P0 (0, 0)
extrude "Extrusion43" cut sketch "Sketch43" against normal blind 6.35
sketch "Sketch44" plane through (-25.4072, 415.8407, -11.9634) normal (0, 1, 0) x (1, 0, 0)
  line L0 (0, -6.35) -> (101.6, -6.35) projected
  line L1 (101.6, 0) -> (101.6, -6.35) projected
  line L2 (0, 0) -> (101.6, 0) projected
  line L3 (0, -6.35) -> (0, 0) projected
  point P0 (25.4072, -11.9634)
extrude "Extrusion44" add sketch "Sketch44" along normal blind 19.05
sketch "Sketch45" plane through (-25.4072, 314.2407, -11.9634) normal (0, -1, 0) x (1, 0, 0)
  line L0 (101.6, 6.35) -> (0, 6.35) projected
  line L1 (0, 6.35) -> (0, 0) projected
  line L2 (101.6, 0) -> (0, 0) projected
  line L3 (101.6, 6.35) -> (101.6, 0) projected
  point P0 (25.4072, 11.9634)
extrude "Extrusion45" add sketch "Sketch45" along normal blind 19.05
sketch "Sketch46" plane through (0, 0, -11.9634) normal (0, 0, -1) x (-1, 0, 0)
  line L0 (-76.1928, 295.1907) -> (25.4072, 295.1907) projected
  circle A0 centre (-65.8804, 324.5531) radius 1.9812 projected
  circle A1 centre (15.0948, 324.5531) radius 1.9812 projected
  circle A2 centre (15.0948, 405.5283) radius 1.9812 projected
  line L1 (-65.8804, 324.5531) -> (15.0948, 324.5531)
  line L2 (15.0948, 324.5531) -> (15.0948, 405.5283)
  circle A3 centre (-25.3928, 365.0407) radius 11.5
  line L3 (-25.3928, 365.0407) -> (-35.8928, 365.0407)
  line L4 (-35.8928, 365.0407) -> (-14.8928, 365.0407)
  line L5 (-14.8928, 365.0407) -> (-14.8928, 400.0407)
  line L6 (-14.8928, 400.0407) -> (-35.8928, 400.0407)
  line L7 (-35.8928, 400.0407) -> (-35.8928, 365.0407)
  point P0 (0, 0)
  dimension "d118" = 23
  dimension "d119" = 10.5
  dimension "d120" = 21
  dimension "d121" = 35
extrude "Extrusion46" cut sketch "Sketch46" against normal blind 19.05 contours A3 L7 L3 L4 L5 | L5 L4 L3 L7 A3 | A3 L7 L6 L5
sketch "Sketch47" plane through (0, 0, -11.9634) normal (0, 0, -1) x (-1, 0, 0)
  arc A0 (-35.8928, 369.7311) -> (-14.8928, 369.7311) centre (-25.3928, 365.0407) ccw projected
  line L0 (-76.1928, 295.1907) -> (25.4072, 295.1907) projected
  line L1 (-25.3928, 365.0407) -> (-38.8928, 365.0407)
  line L2 (-38.8928, 365.0407) -> (-38.8928, 371.5407)
  line L3 (-38.8928, 371.5407) -> (-38.8928, 379.5407)
  line L4 (-38.8928, 379.5407) -> (-38.8928, 387.5407)
  line L5 (-38.8928, 371.5407) -> (-11.8928, 371.5407)
  line L6 (-38.8928, 387.5407) -> (-11.8928, 387.5407)
  circle A1 centre (-38.8928, 371.5407) radius 1
  circle A2 centre (-38.8928, 387.5407) radius 1
  circle A3 centre (-11.8928, 371.5407) radius 1
  circle A4 centre (-11.8928, 387.5407) radius 1
  point P0 (0, 0)
  dimension "d124" = 13.5
  dimension "d125" = 6.5
  dimension "d126" = 8
  dimension "d127" = 8
  dimension "d128" = 27
  dimension "d129" = 27
  dimension "d130" = 2
extrude "Extrusion47" cut sketch "Sketch47" against normal blind 25.4
sketch "Sketch49" plane through (-25.4072, 295.1907, -11.9634) normal (0, -1, 0) x (1, 0, 0)
  line L0 (101.6, 6.35) -> (101.6, 0) projected
  line L1 (0, 6.35) -> (101.6, 6.35) projected
  line L2 (0, 0) -> (0, 6.35) projected
  line L3 (101.6, 0) -> (0, 0) projected
  point P0 (25.4072, 11.9634)
extrude "Extrusion48" add sketch "Sketch49" along normal blind 3.175
sketch "Sketch50" plane through (-25.4072, 434.8907, -11.9634) normal (0, 1, 0) x (1, 0, 0)
  line L0 (0, -6.35) -> (0, 0) projected
  line L1 (101.6, -6.35) -> (0, -6.35) projected
  line L2 (101.6, 0) -> (101.6, -6.35) projected
  line L3 (0, 0) -> (101.6, 0) projected
  point P0 (25.4072, -11.9634)
extrude "Extrusion49" add sketch "Sketch50" along normal blind 3.175
properties part number "kinect base closer holes"
